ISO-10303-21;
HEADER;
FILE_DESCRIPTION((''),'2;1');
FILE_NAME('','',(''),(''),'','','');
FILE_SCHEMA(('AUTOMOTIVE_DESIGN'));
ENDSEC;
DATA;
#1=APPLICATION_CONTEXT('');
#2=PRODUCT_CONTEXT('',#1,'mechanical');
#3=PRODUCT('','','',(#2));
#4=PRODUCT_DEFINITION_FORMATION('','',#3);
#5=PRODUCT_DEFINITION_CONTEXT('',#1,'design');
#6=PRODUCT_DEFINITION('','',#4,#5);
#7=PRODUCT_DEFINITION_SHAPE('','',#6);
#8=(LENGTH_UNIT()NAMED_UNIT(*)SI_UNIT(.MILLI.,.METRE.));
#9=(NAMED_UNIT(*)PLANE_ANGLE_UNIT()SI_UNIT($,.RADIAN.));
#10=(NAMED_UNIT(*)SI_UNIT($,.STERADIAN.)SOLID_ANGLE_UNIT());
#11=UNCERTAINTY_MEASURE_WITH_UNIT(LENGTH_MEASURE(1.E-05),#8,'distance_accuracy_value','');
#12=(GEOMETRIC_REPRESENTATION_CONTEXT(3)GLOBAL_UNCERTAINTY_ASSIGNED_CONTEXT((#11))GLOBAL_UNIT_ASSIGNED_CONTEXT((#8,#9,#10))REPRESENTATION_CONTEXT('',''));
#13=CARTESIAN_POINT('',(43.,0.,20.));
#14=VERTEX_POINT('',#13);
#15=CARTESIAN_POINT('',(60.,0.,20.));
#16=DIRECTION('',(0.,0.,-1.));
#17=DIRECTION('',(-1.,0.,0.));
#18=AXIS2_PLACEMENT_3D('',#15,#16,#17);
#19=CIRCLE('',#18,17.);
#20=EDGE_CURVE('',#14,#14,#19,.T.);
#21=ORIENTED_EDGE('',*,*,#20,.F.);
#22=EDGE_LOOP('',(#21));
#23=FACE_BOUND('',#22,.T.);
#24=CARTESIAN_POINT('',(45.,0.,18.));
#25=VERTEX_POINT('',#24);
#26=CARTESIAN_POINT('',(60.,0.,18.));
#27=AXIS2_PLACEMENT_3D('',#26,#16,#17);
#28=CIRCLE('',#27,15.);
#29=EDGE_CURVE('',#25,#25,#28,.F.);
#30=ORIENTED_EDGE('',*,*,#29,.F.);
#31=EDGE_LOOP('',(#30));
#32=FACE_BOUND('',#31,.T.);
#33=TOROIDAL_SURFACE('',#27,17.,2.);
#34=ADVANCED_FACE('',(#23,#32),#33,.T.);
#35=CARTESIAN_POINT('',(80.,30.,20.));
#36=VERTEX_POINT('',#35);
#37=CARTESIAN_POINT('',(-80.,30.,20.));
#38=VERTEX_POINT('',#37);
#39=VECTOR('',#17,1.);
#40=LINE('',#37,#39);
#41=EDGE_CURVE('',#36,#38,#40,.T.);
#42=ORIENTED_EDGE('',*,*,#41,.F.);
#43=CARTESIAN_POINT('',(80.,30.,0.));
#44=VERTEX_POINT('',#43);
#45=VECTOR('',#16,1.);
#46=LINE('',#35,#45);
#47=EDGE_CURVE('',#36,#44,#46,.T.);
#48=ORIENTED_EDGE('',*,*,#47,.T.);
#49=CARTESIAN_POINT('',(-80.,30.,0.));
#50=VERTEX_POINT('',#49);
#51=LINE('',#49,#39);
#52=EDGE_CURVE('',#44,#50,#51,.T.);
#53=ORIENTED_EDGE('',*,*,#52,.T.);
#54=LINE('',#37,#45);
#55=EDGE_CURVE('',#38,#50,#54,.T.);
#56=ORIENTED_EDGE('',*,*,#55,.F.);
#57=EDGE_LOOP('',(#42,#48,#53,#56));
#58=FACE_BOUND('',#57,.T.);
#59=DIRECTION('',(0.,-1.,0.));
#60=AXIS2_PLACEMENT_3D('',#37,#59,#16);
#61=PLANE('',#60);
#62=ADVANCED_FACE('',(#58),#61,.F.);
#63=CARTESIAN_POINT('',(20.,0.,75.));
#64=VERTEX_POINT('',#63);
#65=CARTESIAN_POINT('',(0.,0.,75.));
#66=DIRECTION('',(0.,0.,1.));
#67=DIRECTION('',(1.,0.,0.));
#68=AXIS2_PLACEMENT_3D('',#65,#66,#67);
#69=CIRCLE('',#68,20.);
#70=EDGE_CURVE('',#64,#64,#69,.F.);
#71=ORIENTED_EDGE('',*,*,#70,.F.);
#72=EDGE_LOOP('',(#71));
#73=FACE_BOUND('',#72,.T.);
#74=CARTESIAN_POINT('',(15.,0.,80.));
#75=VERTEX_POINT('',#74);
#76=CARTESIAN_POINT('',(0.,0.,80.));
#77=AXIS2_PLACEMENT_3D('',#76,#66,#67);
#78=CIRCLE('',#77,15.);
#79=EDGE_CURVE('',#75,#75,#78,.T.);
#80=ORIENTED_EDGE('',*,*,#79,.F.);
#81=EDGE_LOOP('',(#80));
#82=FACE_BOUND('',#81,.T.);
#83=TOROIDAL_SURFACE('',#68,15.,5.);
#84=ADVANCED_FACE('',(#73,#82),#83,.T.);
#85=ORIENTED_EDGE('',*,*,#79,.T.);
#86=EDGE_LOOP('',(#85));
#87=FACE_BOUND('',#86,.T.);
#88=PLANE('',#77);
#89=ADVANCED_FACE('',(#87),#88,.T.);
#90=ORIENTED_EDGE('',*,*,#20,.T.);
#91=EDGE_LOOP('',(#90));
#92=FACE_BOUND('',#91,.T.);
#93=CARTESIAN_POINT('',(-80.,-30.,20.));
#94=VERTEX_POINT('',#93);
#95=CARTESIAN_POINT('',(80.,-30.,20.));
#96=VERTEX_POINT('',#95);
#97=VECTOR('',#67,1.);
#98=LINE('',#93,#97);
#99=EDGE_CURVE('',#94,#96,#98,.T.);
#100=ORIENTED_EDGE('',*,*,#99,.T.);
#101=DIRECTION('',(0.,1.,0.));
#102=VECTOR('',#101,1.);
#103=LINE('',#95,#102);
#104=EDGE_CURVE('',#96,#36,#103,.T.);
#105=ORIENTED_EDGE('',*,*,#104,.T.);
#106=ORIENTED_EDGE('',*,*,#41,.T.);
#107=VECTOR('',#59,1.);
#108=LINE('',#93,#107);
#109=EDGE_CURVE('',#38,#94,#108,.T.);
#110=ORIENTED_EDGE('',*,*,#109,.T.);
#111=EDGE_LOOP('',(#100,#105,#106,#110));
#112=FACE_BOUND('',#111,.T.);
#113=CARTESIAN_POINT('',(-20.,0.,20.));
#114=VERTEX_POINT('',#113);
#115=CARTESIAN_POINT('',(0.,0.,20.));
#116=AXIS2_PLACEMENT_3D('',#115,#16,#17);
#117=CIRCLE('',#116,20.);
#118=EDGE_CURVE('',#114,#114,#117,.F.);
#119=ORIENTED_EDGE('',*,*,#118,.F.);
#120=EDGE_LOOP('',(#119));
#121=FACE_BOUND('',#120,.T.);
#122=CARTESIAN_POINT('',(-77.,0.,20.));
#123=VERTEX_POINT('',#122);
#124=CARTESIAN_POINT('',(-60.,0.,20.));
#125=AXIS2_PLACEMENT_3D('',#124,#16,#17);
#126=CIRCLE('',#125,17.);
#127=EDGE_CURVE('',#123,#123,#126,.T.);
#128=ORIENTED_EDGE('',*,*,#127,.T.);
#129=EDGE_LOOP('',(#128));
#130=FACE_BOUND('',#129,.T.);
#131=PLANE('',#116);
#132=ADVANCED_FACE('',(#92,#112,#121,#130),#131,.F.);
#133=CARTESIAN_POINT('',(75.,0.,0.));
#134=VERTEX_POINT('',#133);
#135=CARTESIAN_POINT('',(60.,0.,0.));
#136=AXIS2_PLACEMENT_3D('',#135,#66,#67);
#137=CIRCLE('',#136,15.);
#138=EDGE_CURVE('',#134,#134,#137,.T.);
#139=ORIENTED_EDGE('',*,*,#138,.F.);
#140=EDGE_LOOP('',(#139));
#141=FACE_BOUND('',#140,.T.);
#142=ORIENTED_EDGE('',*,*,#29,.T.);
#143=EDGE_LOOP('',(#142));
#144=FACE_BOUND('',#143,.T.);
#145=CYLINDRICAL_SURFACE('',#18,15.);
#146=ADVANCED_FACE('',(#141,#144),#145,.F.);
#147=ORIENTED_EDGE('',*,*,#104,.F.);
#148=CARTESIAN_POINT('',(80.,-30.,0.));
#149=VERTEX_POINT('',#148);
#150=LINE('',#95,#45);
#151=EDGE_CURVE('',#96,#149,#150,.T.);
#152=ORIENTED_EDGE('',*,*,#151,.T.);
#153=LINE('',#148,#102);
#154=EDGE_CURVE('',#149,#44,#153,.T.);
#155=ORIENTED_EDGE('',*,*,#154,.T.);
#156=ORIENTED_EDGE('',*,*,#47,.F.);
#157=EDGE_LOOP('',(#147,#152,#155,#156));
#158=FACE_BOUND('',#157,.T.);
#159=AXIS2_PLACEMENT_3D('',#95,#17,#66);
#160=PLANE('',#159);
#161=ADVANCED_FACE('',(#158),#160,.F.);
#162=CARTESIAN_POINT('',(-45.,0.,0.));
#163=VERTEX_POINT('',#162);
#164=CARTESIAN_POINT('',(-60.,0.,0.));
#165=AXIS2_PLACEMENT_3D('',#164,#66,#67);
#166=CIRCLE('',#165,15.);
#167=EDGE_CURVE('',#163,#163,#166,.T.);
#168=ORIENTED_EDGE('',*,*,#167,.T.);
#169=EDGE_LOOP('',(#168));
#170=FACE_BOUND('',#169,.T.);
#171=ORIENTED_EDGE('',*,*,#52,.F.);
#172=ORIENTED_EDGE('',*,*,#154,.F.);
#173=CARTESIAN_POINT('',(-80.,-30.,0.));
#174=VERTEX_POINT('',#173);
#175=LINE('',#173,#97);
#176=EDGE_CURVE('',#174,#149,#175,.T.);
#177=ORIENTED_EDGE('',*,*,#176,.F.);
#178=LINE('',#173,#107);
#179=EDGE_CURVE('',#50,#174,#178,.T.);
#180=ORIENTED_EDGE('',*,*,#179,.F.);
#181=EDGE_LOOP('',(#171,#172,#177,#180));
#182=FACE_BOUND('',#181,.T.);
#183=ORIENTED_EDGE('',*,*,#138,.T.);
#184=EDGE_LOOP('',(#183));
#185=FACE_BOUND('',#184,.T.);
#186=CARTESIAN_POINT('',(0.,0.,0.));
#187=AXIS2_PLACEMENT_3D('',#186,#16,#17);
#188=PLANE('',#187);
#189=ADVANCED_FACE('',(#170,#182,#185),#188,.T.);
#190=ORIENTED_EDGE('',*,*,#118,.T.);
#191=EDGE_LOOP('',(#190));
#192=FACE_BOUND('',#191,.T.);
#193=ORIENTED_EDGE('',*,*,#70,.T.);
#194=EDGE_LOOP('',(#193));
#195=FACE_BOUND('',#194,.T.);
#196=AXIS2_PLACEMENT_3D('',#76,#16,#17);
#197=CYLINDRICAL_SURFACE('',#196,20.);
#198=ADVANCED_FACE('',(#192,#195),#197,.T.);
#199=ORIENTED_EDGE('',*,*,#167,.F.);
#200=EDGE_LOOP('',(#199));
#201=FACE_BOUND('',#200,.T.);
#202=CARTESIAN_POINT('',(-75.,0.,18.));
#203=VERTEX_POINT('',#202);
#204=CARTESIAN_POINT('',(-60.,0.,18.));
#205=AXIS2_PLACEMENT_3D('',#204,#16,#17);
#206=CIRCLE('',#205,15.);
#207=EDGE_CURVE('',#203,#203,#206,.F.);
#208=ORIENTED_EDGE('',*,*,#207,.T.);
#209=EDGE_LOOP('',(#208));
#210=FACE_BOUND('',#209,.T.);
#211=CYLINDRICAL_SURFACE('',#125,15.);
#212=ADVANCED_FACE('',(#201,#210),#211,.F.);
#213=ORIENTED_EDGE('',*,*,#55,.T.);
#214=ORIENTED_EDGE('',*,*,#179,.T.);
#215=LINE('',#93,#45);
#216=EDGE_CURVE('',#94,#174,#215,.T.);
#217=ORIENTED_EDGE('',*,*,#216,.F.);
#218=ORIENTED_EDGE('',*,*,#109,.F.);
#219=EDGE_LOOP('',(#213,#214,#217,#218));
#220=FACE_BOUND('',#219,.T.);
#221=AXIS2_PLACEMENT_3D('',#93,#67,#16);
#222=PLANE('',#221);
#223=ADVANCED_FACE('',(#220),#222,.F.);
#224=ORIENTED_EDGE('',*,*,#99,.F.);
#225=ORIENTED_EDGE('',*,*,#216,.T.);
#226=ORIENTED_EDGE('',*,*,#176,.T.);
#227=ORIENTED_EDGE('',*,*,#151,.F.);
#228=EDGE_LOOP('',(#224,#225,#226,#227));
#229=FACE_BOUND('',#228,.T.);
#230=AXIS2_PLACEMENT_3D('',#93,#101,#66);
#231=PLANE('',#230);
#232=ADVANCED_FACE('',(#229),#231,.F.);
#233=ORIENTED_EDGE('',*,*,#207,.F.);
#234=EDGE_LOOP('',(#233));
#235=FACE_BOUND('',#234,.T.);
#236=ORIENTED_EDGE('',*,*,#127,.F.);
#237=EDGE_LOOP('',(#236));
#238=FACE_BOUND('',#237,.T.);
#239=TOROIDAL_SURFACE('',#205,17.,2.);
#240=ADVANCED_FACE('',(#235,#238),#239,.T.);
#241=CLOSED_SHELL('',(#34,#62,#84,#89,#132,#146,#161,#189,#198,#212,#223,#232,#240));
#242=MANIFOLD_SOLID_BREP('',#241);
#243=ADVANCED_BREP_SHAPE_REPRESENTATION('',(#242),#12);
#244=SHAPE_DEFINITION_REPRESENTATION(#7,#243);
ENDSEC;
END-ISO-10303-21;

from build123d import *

# Parameters (mm, degrees)
SKETCH4_W               = 160
SKETCH4_H               = 60
BOSS_EXTRUDE1_DEPTH     = 20
SKETCH6_R               = 20
BOSS_EXTRUDE2_DEPTH     = 80
BOSS_EXTRUDE3_OUTLINE_R = 15
BOSS_EXTRUDE3_DEPTH     = 20
FILLET3_R               = 5
FILLET4_R               = 2
FILLET5_R               = 2


# Read off the part's stored shape, not the designer's step: Boss-Extrude3
with BuildPart() as part:
    # Sketch4 → Boss-Extrude1 (new body)
    with BuildSketch(Plane.XY):
        Rectangle(SKETCH4_W, SKETCH4_H)
    extrude(amount=BOSS_EXTRUDE1_DEPTH)

    # Sketch6 → Boss-Extrude2 (add)
    with BuildSketch(Plane.XY):
        with Locations(Location((0, 0, 0), (0, 0, 180))):
            Circle(SKETCH6_R)
    extrude(amount=BOSS_EXTRUDE2_DEPTH)

    # Boss-Extrude3 outline → Boss-Extrude3 (cut)
    with BuildSketch(Plane.XY):
        with Locations((60, 0)):
            Circle(BOSS_EXTRUDE3_OUTLINE_R)
        with Locations((-60, 0)):
            Circle(BOSS_EXTRUDE3_OUTLINE_R)
    extrude(amount=BOSS_EXTRUDE3_DEPTH, mode=Mode.SUBTRACT)

    # Fillet3
    fillet3_edges = [part.edges().sort_by_distance(p)[0] for p in [
        (20, 0, 80),
    ]]
    fillet(fillet3_edges, radius=FILLET3_R)

    # Fillet4
    fillet4_edges = [part.edges().sort_by_distance(p)[0] for p in [
        (-75, 0, 20),
    ]]
    fillet(fillet4_edges, radius=FILLET4_R)

    # Fillet5
    fillet5_edges = [part.edges().sort_by_distance(p)[0] for p in [
        (45, 0, 20),
    ]]
    fillet(fillet5_edges, radius=FILLET5_R)


solid = part.part
